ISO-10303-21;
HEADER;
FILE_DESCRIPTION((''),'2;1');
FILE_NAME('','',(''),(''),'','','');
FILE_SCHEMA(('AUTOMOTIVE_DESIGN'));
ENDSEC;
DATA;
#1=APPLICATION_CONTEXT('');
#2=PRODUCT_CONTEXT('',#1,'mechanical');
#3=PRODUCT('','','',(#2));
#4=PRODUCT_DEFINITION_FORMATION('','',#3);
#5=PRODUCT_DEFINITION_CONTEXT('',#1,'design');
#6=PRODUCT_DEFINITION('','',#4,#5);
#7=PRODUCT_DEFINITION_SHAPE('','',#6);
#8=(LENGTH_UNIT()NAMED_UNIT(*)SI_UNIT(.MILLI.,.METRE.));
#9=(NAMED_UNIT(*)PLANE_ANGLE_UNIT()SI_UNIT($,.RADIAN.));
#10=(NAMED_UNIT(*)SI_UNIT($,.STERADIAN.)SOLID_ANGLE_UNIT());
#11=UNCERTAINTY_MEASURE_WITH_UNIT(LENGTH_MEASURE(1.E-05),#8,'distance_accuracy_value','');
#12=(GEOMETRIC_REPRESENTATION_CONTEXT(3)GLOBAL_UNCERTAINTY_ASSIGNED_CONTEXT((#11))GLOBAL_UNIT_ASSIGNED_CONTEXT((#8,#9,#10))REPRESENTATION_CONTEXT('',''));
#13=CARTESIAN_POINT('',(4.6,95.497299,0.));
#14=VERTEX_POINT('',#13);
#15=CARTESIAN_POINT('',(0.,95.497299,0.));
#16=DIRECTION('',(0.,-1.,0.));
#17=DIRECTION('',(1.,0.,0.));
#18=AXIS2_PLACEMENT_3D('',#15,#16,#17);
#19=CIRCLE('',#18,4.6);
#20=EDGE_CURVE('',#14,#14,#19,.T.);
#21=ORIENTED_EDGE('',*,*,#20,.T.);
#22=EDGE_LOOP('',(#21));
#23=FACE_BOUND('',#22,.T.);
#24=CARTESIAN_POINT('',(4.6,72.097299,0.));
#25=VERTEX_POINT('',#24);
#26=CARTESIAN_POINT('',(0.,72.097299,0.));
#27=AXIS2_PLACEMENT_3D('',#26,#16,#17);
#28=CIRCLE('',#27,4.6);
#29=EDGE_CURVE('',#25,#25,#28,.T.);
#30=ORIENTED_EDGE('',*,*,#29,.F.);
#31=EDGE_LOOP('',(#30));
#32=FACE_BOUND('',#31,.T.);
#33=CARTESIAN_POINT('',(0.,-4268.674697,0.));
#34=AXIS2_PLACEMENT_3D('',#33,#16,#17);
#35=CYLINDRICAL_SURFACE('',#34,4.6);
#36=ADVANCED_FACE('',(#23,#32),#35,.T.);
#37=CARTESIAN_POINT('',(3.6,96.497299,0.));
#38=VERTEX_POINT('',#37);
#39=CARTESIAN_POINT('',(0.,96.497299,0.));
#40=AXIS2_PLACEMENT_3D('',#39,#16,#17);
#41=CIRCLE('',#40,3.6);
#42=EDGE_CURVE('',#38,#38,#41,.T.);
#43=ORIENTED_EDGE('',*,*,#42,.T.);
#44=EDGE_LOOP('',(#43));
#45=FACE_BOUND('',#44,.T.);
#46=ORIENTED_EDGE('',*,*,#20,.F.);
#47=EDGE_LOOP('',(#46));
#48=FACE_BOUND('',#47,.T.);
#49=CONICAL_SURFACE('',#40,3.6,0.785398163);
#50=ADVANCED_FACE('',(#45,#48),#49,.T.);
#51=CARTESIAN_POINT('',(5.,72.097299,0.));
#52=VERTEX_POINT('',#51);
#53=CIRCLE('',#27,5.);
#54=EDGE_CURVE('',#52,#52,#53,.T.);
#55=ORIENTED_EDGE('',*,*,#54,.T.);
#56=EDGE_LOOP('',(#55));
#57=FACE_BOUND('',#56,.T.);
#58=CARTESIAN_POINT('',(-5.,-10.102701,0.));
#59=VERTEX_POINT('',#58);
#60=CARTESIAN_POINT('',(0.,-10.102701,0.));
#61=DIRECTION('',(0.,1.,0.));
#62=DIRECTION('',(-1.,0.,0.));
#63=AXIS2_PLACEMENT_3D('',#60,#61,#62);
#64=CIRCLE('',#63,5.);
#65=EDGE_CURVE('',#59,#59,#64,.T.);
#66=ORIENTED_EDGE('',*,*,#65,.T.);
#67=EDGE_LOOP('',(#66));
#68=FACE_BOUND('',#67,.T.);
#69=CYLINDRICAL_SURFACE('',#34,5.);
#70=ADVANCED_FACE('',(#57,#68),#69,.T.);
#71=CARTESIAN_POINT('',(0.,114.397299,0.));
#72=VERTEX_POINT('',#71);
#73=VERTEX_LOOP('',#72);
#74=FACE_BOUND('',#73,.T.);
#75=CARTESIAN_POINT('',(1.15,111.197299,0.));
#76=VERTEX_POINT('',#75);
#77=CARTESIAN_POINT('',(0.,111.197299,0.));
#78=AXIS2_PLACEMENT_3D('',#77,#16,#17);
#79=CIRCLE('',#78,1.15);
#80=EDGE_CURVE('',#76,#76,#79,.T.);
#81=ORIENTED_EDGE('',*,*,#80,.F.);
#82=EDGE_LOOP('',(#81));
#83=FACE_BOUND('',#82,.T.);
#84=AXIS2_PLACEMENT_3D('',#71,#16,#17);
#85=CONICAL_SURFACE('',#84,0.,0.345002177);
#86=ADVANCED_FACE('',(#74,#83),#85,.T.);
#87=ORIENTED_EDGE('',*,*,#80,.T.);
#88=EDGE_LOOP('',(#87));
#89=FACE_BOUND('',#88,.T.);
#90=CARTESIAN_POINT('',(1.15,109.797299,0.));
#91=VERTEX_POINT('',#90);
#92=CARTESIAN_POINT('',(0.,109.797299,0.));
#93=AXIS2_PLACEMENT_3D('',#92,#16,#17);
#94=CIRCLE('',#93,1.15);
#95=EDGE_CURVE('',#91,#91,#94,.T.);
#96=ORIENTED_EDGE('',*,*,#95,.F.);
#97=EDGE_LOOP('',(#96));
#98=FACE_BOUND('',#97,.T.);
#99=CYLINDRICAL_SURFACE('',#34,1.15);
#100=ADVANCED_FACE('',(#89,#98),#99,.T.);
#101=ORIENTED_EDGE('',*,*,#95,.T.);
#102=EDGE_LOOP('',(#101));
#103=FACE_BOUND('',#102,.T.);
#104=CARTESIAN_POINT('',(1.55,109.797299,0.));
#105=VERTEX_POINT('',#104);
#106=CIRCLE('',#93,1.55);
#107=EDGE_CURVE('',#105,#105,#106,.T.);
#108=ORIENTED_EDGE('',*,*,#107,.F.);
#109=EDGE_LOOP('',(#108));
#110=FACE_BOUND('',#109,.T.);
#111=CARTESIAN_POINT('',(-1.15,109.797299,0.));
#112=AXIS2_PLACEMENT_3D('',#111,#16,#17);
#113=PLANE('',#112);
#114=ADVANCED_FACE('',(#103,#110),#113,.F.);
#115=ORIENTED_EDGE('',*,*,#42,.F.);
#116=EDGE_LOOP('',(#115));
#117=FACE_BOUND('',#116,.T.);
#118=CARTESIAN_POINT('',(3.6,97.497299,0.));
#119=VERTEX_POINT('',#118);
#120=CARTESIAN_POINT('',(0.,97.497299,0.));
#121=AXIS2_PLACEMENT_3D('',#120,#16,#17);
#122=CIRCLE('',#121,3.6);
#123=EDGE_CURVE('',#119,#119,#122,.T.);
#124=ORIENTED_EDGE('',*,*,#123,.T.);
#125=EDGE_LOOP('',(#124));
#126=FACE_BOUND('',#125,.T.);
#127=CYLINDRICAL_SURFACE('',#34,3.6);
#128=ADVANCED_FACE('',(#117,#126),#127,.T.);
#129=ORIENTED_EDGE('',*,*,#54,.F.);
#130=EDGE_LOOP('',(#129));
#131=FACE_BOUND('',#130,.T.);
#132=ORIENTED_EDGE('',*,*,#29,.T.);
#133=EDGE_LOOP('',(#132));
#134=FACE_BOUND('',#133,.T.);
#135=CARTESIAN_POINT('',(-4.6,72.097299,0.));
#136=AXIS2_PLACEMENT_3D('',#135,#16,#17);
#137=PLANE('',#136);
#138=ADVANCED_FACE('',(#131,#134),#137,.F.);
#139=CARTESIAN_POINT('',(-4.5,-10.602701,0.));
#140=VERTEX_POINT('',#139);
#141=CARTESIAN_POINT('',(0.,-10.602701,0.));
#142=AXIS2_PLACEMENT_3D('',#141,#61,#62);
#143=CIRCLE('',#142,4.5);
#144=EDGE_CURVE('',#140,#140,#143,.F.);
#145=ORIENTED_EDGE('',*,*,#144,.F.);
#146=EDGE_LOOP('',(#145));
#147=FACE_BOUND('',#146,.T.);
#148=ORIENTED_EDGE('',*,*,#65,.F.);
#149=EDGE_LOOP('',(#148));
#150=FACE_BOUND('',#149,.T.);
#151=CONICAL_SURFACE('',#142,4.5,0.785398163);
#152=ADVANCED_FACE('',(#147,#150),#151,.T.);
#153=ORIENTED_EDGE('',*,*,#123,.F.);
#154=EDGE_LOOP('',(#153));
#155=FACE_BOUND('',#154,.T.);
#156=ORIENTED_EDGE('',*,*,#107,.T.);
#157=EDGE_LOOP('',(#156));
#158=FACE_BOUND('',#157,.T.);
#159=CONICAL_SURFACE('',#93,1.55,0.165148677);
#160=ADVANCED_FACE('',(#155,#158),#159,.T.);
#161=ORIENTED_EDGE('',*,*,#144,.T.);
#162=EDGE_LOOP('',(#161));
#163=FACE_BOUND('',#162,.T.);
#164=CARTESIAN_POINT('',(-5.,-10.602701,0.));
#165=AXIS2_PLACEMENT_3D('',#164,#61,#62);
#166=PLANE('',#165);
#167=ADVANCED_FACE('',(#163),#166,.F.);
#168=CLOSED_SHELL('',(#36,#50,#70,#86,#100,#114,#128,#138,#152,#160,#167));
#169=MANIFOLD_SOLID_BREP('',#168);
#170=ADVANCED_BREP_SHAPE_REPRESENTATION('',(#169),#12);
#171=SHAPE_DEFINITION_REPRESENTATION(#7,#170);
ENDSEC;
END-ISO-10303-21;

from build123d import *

# Parameters (mm, degrees)
CHAMFER_1_SIZE = 0.5


# Read off the part's stored shape, not the designer's step: 旋转1
with BuildPart() as part:
    # 旋转1 outline → 旋转1 (revolve)
    with BuildSketch(Plane.XY):
        Polygon((1.15, 111.197298964), (0, 114.397298964), (0, -10.602701036), (5, -10.602701036), (5, 72.097298964), (4.6, 72.097298964), (4.6, 95.497298964), (3.6, 96.497298964), (3.6, 97.497298964), (1.55, 109.797298964), (1.15, 109.797298964), align=None)
    revolve(axis=Axis((0, 0, 0), (0, 1, 0)))

    # 倒角1
    chamfer_1_edges = [part.edges().sort_by_distance(p)[0] for p in [
        (-5, -10.602701036, 0),
    ]]
    chamfer(chamfer_1_edges, length=CHAMFER_1_SIZE)


solid = part.part
